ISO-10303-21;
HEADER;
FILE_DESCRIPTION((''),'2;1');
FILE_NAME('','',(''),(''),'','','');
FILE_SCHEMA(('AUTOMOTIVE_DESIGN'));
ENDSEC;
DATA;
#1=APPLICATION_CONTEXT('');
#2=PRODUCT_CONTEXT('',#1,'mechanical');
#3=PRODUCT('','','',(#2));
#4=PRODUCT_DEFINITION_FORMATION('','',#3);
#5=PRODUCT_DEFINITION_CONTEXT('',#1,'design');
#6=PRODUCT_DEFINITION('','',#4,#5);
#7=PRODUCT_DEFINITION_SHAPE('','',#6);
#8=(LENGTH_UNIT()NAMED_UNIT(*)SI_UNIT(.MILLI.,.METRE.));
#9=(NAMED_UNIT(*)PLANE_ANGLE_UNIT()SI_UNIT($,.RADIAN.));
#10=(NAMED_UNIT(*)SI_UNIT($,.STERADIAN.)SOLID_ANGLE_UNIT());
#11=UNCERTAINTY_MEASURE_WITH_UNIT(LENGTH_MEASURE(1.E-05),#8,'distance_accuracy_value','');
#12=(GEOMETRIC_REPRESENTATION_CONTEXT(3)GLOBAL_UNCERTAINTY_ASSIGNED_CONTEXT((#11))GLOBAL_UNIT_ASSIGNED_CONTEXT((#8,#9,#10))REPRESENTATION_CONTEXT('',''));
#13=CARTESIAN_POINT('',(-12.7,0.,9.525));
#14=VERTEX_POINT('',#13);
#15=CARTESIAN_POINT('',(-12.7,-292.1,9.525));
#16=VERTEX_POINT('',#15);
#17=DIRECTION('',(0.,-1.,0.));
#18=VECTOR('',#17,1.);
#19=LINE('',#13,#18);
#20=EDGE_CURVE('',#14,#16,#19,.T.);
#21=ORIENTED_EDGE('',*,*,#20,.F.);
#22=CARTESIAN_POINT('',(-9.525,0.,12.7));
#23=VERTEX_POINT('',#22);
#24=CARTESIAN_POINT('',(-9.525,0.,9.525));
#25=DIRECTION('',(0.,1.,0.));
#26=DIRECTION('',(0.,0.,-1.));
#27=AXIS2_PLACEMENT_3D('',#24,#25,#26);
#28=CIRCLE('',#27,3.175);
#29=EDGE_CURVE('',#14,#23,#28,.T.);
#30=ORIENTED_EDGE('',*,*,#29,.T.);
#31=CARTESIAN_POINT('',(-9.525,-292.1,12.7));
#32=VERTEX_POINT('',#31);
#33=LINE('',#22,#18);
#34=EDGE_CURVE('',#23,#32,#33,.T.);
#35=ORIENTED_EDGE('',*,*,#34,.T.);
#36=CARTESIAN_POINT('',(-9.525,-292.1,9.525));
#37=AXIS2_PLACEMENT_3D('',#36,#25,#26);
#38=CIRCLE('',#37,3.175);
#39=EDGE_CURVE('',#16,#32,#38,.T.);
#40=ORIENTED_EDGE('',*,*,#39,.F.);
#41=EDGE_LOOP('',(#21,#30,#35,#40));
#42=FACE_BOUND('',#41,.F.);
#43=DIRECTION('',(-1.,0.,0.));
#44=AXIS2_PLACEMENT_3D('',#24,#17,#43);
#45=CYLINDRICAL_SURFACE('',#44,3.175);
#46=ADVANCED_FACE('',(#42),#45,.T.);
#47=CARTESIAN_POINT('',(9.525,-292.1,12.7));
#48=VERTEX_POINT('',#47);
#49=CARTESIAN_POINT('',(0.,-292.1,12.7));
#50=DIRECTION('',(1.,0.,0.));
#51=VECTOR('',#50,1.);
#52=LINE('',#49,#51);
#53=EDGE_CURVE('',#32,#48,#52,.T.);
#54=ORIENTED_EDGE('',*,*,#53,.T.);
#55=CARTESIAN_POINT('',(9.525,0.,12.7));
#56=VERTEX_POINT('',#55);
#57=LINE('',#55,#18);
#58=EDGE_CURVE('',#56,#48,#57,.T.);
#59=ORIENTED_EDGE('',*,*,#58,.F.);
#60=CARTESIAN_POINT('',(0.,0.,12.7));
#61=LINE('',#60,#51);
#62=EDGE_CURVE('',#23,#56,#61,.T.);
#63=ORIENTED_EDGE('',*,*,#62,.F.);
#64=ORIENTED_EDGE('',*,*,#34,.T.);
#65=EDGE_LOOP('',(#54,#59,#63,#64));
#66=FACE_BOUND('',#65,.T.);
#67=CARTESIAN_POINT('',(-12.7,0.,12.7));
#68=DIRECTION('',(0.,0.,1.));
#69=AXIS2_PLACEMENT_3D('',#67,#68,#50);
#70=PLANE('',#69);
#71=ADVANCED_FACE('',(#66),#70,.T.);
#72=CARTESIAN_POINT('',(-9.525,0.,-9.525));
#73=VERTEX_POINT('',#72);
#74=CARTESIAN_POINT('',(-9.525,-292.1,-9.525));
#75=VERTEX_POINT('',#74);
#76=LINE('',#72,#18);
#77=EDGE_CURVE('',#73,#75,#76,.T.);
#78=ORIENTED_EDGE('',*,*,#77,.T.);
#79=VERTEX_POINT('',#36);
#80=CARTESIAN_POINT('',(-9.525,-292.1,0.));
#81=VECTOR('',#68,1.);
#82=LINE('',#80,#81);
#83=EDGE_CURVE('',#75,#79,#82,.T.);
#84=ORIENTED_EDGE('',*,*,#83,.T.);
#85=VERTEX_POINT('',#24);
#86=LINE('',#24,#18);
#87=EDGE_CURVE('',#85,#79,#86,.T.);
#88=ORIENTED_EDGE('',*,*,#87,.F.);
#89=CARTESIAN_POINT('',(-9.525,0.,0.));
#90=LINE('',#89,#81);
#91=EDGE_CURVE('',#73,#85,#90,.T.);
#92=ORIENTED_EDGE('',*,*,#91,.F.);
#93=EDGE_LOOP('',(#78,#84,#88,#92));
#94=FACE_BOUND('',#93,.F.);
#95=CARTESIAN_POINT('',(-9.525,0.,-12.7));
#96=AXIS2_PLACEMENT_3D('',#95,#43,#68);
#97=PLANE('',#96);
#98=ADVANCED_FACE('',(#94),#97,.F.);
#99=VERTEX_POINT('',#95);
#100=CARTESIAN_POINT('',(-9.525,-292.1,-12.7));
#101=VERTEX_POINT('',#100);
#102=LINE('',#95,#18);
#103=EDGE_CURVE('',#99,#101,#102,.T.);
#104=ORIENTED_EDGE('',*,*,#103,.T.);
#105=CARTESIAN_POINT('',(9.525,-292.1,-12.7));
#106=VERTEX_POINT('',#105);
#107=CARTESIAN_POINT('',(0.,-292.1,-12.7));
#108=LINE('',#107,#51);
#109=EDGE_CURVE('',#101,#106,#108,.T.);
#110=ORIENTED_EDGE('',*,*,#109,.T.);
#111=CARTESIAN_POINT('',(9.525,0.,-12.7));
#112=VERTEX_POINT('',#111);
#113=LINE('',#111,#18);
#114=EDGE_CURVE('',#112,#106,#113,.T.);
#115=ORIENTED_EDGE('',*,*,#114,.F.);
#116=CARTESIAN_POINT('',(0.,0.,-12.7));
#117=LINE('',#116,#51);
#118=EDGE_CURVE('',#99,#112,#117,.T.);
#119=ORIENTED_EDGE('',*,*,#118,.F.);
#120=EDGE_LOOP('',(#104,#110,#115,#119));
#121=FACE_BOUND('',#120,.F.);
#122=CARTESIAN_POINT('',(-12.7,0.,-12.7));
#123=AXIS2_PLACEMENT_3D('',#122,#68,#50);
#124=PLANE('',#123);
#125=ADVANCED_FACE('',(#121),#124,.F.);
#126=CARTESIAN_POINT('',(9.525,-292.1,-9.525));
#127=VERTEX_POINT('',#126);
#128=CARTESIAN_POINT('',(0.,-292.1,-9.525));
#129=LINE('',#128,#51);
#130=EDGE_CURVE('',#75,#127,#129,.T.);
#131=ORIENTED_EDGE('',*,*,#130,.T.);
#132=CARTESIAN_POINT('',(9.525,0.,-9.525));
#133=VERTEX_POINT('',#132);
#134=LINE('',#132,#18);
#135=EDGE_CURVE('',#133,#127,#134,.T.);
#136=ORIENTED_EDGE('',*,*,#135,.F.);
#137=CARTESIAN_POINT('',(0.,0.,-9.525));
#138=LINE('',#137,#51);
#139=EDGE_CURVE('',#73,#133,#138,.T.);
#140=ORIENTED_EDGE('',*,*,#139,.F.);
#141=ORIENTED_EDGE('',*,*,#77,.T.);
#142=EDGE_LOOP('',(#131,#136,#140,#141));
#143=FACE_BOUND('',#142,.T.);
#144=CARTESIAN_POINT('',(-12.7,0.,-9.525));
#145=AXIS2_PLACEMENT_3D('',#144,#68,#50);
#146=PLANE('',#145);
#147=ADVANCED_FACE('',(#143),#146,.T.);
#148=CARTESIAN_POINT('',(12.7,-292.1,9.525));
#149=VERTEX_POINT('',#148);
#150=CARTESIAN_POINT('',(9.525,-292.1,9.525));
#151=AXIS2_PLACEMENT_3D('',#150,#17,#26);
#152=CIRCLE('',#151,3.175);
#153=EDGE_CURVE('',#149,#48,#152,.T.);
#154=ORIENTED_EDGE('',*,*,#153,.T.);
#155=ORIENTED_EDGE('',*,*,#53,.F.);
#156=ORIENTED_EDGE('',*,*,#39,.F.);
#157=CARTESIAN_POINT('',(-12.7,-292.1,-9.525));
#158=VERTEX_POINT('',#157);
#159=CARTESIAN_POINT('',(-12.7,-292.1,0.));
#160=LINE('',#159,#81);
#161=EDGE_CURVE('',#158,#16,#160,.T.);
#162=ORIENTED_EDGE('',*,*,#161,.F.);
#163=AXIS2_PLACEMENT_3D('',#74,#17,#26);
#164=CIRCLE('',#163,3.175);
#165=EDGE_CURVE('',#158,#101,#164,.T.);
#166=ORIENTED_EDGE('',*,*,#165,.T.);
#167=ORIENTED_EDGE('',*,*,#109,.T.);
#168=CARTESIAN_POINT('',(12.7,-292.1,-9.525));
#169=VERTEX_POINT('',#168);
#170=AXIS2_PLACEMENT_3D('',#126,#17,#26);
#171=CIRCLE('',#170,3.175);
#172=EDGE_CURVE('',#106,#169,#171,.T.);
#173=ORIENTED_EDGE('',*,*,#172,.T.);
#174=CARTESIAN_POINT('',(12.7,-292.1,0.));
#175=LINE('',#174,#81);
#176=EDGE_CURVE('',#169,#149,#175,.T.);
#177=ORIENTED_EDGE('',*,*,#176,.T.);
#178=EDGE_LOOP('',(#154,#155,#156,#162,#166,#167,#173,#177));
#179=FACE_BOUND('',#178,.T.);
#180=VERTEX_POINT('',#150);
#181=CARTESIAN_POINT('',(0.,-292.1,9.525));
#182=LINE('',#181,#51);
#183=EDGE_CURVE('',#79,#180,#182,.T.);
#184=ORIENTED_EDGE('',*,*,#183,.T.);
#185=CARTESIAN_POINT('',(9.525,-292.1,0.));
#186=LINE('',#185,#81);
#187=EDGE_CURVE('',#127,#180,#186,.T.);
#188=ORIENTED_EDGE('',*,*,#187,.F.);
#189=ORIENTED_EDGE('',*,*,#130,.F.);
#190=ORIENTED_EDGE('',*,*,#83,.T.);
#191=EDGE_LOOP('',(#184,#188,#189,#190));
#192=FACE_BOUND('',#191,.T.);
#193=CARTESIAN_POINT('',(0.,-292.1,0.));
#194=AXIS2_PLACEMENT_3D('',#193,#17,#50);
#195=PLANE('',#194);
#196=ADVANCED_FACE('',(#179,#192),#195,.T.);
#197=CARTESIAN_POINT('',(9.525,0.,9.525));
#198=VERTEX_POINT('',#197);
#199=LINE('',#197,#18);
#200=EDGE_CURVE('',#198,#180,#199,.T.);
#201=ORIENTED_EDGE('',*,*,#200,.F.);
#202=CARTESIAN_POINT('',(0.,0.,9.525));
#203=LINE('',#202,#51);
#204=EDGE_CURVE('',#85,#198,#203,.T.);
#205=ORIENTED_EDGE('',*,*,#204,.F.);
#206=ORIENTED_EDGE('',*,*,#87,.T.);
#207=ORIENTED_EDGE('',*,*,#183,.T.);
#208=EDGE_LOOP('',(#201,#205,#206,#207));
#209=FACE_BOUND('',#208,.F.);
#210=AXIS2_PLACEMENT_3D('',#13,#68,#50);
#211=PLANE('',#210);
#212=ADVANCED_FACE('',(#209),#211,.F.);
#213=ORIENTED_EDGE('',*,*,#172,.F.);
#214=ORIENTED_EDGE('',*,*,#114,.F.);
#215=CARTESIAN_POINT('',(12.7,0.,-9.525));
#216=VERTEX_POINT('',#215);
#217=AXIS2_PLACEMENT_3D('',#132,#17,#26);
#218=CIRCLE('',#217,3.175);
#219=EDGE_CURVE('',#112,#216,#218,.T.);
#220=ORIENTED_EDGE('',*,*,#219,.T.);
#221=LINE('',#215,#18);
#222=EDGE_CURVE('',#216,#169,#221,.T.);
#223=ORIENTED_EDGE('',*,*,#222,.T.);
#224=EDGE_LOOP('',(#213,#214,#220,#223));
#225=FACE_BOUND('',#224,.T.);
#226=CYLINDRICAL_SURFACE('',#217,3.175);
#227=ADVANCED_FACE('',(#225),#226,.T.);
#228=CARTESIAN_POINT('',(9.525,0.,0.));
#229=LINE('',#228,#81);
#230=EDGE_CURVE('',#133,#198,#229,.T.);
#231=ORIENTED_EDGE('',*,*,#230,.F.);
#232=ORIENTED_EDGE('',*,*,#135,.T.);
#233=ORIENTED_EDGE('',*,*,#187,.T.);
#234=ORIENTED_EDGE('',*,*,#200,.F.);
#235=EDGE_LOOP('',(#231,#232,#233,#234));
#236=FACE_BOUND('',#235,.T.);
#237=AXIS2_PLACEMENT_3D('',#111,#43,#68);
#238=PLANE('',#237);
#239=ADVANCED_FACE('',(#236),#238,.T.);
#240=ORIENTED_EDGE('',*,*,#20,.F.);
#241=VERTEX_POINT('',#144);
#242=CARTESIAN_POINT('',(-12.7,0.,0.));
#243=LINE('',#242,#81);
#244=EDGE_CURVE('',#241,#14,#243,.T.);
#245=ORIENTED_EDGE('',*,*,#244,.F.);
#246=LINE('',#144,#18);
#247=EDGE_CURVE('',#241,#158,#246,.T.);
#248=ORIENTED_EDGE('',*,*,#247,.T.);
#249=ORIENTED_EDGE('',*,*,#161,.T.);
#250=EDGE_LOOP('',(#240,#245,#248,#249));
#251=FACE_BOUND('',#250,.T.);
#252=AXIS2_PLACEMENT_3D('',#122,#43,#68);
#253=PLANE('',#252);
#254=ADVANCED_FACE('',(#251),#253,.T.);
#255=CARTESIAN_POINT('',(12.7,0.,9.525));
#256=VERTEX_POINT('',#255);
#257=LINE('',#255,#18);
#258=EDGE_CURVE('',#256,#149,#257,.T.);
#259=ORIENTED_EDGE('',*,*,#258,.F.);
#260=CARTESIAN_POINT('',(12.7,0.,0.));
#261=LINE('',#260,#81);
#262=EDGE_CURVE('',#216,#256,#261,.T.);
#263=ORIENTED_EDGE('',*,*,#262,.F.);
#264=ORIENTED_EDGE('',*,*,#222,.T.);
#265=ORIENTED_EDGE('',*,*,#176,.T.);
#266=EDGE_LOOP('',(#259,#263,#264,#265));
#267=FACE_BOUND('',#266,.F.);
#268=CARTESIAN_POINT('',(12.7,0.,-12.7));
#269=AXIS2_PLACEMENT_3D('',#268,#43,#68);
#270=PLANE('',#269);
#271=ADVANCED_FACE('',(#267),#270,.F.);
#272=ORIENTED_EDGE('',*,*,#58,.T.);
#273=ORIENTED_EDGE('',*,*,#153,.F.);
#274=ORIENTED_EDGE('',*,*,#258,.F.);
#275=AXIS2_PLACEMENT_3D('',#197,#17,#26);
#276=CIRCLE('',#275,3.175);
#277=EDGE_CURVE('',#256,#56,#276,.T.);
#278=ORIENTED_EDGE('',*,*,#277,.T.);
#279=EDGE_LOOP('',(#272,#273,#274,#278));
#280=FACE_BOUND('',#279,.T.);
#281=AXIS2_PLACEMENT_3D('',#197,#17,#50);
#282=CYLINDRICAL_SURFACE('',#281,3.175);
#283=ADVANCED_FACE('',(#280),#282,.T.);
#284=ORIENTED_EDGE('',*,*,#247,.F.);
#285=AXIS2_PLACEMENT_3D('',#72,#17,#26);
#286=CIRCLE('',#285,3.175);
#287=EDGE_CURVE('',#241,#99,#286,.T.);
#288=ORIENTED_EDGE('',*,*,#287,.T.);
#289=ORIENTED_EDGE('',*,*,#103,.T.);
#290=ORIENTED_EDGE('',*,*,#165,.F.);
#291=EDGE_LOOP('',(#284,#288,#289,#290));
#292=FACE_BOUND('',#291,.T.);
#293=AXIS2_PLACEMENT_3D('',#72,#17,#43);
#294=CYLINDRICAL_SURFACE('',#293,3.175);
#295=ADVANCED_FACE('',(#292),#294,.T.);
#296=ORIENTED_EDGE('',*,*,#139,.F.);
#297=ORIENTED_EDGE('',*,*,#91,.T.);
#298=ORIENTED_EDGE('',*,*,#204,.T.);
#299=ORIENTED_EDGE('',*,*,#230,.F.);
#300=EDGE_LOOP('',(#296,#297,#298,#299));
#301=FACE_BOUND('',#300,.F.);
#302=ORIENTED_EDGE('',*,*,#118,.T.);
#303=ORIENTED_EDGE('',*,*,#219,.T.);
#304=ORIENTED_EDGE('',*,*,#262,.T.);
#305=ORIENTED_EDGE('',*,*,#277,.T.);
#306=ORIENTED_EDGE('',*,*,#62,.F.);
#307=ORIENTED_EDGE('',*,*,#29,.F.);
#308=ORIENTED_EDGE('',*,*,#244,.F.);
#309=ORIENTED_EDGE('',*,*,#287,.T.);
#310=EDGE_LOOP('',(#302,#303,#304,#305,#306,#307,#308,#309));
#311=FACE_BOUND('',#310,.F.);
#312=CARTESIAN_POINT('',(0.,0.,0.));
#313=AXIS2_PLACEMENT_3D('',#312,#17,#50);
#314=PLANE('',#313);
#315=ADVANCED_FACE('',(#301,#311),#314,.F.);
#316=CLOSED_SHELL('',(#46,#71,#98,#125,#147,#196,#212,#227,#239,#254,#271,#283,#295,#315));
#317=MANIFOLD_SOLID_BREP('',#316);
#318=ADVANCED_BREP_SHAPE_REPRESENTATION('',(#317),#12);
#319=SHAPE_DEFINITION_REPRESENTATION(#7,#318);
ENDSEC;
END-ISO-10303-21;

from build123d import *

# Parameters (mm, degrees)
F0_W     = 25.4
F0_H     = 25.4
F1_DEPTH = 292.1
F2_R     = 3.175
F3_T     = 3.175


# Not quite as in the source:
# - a shell that OpenCascade refuses in one call is made with other operations: the cavity is built on its own and cut out


with BuildPart() as f1:
    # F0 (on Front) → F1 (new body)
    with BuildSketch(Plane.XZ):
        Rectangle(F0_W, F0_H)
    extrude(amount=F1_DEPTH)

    # F2
    f2_edges = [f1.edges().sort_by_distance(p)[0] for p in [
        (-12.7, -146.05, 12.7),
        (12.7, -146.05, 12.7),
        (12.7, -146.05, -12.7),
        (-12.7, -146.05, -12.7),
    ]]
    fillet(f2_edges, radius=F2_R)

    # F3: shell of thickness 3.175, made by hand


with BuildPart() as f3_core1:
    # F3_t2: copy of F1
    add(f1.part)

    # the walls: a layer under each face that stays
    f3_faces = [f3_core1.faces().sort_by_distance(p)[0] for p in [
        (0, -146.05, -12.7),
        (-12.7, -146.05, 0),
        (12.7, -146.05, 0),
        (0, -146.05, 12.7),
    ]]
    thicken(f3_faces, amount=-F3_T, mode=Mode.SUBTRACT)


with BuildPart() as f1_1:
    add(f1.part)

    # what is left inside the walls is the cavity
    f3_cavity = [f3_core1.part.solids().sort_by_distance(p)[0] for p in [
        (0, -194.733333, -9.49325),
    ]]
    add(f3_cavity, mode=Mode.SUBTRACT)


solid = f1_1.part
